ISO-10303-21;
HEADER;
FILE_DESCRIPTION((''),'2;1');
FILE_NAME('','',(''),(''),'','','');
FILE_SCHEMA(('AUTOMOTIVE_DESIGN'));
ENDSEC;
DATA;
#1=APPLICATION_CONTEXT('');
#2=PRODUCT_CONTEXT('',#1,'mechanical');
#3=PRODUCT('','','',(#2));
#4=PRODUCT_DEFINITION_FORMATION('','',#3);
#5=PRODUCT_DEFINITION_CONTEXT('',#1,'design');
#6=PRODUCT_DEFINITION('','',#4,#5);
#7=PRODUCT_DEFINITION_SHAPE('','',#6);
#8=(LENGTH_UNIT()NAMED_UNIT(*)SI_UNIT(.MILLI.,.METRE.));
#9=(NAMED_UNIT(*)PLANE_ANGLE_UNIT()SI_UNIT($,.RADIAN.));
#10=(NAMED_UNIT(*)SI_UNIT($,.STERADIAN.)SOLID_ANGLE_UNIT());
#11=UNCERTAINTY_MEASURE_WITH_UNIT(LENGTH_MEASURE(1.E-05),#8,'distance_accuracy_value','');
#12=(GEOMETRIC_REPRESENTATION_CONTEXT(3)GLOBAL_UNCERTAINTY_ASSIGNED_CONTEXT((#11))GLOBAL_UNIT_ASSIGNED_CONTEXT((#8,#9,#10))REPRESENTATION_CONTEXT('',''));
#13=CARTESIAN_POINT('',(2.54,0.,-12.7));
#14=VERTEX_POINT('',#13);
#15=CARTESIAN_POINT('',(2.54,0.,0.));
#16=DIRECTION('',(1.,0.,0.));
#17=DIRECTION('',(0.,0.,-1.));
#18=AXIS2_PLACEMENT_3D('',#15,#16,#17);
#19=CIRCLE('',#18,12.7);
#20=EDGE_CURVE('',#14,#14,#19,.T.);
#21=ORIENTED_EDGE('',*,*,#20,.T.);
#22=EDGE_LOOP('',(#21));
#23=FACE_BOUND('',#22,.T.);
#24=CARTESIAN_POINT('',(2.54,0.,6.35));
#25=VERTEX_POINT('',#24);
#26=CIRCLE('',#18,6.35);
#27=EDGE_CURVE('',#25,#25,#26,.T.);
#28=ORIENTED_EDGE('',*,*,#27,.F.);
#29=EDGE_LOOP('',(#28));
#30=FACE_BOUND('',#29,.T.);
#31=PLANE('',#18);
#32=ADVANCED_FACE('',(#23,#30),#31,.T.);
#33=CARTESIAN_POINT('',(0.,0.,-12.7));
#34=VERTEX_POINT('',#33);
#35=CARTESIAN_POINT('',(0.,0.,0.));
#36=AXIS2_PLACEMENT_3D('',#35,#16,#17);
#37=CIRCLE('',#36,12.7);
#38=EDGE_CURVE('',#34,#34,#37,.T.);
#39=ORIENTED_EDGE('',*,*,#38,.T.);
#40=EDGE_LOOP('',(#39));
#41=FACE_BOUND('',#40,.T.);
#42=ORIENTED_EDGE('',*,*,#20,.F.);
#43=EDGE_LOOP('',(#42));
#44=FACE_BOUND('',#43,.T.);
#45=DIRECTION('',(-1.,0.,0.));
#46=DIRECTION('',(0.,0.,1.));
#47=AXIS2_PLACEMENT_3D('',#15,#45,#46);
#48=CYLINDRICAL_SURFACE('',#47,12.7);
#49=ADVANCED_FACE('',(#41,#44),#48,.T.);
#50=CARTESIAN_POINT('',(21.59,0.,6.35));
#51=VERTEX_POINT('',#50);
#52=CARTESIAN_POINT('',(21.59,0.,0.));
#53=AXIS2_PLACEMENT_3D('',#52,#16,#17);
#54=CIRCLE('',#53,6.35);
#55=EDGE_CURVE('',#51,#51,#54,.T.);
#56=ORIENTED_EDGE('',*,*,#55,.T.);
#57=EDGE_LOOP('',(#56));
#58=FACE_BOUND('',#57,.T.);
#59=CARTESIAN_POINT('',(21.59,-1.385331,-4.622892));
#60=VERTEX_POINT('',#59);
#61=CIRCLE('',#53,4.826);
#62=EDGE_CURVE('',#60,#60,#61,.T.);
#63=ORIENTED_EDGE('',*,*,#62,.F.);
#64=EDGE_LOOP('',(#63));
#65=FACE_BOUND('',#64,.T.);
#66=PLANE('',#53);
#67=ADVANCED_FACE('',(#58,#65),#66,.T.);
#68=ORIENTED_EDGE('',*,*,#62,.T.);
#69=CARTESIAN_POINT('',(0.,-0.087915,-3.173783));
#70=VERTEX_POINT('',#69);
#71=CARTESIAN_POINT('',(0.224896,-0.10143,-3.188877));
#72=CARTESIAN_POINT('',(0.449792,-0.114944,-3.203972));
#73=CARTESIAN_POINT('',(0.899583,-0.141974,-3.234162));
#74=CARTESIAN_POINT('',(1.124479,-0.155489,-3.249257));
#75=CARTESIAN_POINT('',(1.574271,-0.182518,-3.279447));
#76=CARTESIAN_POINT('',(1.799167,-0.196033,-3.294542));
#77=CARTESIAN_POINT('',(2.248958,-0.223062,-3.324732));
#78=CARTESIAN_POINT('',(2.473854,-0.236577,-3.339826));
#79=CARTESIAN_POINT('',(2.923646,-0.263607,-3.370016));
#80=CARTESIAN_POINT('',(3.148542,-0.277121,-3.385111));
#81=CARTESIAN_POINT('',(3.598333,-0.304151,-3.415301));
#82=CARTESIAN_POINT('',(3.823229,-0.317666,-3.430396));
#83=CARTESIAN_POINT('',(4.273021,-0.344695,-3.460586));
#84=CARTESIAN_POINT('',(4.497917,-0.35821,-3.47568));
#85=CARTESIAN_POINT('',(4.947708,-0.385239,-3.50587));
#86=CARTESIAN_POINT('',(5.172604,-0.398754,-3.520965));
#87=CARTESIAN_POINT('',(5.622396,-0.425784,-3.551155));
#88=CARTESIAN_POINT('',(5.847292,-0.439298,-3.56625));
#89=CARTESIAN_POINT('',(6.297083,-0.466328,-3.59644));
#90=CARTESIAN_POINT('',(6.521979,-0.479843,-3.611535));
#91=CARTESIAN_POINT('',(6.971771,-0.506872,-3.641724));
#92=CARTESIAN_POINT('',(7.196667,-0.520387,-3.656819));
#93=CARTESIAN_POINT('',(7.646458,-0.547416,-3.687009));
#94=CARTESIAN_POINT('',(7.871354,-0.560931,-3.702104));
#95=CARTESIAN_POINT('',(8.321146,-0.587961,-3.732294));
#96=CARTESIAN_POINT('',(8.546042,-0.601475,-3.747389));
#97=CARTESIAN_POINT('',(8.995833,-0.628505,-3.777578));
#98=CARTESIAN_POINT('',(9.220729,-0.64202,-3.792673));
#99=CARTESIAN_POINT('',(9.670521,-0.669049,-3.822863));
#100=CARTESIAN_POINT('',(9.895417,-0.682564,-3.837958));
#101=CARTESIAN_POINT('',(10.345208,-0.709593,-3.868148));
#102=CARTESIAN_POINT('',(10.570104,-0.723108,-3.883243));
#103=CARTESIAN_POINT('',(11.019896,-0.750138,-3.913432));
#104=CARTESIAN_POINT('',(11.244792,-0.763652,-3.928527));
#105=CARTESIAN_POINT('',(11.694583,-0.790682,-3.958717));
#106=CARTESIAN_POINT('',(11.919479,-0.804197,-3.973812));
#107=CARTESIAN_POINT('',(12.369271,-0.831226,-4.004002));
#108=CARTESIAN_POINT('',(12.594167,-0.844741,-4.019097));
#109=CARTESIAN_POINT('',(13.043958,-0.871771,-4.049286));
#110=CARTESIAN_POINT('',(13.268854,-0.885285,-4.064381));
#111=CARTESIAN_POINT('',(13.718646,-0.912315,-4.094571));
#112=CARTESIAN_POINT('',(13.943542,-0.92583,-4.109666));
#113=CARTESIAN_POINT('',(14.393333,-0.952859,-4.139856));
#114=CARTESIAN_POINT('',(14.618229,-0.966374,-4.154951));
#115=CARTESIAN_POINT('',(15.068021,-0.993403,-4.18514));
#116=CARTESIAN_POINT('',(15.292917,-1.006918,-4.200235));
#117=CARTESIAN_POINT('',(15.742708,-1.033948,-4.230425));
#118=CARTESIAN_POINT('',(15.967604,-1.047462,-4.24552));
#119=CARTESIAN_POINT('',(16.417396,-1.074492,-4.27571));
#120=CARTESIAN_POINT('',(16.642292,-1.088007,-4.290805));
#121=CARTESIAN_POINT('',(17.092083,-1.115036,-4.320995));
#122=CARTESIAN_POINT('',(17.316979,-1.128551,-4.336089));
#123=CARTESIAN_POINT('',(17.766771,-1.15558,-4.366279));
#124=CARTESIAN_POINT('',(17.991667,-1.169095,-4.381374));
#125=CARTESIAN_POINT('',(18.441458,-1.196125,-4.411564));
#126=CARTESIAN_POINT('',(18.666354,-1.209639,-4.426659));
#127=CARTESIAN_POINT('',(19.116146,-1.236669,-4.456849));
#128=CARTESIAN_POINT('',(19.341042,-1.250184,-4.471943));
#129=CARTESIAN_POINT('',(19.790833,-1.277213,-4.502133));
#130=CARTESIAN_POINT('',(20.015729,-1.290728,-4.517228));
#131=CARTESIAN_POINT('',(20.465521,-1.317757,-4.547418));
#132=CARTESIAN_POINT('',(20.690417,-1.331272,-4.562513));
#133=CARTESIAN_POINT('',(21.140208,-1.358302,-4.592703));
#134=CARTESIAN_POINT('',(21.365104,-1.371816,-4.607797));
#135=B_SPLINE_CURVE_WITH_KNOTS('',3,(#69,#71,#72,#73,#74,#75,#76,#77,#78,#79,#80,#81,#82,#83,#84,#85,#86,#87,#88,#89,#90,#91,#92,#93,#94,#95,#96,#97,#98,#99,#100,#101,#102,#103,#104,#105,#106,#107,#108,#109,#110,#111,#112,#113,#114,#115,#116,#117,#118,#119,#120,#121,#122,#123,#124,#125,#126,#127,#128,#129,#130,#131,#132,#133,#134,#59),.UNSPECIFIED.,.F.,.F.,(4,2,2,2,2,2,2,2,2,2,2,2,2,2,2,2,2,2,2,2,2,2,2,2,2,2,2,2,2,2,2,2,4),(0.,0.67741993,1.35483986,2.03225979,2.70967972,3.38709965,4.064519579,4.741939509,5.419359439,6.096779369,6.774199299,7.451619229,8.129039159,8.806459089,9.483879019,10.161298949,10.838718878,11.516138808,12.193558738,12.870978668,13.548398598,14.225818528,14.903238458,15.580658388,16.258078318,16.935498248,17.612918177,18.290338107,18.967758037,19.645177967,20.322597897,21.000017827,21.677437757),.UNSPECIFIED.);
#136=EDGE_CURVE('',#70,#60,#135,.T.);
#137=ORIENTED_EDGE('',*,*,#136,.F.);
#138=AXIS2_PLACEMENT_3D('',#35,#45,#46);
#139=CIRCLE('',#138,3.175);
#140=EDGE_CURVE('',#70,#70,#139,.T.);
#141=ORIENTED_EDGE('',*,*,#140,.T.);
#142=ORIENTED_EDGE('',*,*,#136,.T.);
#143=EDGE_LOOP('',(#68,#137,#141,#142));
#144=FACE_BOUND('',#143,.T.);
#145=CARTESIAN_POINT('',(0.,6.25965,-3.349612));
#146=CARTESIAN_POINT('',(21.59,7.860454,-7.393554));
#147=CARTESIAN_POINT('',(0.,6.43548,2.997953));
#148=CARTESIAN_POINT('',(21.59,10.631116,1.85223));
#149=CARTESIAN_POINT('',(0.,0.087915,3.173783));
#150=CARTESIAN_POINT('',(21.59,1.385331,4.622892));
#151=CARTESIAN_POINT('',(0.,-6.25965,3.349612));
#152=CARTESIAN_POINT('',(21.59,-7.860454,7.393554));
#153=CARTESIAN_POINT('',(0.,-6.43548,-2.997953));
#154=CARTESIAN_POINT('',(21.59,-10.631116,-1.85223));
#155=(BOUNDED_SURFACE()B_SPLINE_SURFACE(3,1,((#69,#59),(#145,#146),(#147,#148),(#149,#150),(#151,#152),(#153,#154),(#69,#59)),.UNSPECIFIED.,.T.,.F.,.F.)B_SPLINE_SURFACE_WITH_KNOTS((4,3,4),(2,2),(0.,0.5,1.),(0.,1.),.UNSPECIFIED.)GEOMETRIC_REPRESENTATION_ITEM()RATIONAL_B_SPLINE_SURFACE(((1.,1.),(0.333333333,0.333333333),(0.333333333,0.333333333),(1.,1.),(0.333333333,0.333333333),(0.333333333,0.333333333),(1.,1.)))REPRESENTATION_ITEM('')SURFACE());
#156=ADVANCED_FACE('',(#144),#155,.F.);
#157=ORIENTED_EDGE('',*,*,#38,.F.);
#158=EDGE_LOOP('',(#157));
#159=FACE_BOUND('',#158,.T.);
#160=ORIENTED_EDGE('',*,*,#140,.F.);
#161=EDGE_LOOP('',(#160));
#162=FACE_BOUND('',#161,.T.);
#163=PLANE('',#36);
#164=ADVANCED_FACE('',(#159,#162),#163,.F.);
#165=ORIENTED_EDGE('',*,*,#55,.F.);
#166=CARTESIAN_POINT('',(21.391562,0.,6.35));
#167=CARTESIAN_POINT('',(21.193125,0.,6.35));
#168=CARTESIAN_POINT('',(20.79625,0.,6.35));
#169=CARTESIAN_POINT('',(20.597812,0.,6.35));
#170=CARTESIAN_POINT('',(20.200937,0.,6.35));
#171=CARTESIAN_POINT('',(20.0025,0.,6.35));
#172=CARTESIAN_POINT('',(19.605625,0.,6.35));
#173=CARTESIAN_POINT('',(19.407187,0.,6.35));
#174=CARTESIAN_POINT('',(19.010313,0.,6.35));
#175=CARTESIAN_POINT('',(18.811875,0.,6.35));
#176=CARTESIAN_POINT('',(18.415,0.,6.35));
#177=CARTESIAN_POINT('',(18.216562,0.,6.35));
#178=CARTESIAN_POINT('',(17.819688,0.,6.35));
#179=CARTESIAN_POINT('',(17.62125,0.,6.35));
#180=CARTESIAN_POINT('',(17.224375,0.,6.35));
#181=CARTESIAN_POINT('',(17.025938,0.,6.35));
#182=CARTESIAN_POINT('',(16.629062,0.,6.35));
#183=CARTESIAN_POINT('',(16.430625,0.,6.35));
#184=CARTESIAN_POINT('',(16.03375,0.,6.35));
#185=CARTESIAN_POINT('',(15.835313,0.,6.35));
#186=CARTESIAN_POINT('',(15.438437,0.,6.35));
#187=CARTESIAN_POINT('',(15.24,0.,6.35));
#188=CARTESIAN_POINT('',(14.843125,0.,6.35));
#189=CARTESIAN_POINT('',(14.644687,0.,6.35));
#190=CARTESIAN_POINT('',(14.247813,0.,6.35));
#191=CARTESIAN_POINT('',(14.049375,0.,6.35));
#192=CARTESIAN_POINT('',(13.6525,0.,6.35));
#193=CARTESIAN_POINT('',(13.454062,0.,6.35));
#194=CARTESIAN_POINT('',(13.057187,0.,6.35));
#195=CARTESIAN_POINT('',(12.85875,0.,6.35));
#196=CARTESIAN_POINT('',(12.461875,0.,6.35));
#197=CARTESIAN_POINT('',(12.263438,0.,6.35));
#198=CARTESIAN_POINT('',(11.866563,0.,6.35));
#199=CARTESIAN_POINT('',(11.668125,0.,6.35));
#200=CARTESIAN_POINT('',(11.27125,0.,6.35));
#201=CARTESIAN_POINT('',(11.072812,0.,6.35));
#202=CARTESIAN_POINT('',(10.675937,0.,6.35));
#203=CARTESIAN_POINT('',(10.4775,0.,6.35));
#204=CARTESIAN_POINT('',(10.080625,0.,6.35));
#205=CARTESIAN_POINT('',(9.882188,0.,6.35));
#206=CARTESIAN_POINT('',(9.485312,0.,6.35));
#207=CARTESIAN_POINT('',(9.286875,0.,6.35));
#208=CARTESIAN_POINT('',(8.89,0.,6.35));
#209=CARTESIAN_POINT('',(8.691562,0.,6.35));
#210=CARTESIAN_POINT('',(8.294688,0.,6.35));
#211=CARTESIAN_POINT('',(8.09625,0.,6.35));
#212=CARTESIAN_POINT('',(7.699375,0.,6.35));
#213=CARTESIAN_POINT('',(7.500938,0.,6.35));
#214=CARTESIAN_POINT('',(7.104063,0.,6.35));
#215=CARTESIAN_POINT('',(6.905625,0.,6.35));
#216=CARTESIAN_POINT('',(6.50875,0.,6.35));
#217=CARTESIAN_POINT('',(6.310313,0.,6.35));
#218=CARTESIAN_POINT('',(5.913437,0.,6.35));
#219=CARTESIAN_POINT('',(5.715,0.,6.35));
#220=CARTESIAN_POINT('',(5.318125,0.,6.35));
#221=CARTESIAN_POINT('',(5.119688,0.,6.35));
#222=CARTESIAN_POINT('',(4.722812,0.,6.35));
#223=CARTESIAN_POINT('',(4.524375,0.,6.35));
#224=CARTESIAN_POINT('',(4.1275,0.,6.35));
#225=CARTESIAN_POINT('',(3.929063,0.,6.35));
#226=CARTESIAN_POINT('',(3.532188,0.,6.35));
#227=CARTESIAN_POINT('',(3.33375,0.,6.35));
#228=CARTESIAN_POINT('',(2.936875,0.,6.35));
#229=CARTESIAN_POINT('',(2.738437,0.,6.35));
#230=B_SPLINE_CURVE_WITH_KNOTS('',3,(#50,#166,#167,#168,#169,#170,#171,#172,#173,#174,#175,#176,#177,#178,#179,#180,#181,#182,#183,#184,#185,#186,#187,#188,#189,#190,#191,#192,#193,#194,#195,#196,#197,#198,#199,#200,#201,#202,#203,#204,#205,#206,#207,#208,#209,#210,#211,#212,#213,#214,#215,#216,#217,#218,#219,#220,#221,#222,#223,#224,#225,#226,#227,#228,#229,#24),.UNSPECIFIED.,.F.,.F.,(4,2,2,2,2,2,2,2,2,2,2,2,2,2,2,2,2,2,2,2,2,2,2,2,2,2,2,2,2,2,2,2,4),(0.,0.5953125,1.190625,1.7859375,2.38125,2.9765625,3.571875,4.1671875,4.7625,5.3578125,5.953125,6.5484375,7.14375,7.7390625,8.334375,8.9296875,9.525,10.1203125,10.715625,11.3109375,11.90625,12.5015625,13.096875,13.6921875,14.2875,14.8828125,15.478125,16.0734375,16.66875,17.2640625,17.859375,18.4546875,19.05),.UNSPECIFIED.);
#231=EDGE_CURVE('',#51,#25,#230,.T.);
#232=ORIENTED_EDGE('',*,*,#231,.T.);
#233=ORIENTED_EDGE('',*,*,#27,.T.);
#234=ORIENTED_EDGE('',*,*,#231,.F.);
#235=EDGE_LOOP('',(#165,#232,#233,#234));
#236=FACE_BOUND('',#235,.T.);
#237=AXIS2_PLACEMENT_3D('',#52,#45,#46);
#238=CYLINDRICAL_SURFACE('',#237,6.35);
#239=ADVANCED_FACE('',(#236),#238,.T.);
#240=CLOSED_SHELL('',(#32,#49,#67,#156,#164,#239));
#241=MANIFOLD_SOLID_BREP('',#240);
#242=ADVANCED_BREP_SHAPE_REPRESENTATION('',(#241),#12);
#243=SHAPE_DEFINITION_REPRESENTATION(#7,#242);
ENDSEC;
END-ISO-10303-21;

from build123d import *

# Parameters (mm, degrees)
SKETCH1_R           = 12.7
BOSS_EXTRUDE1_DEPTH = 2.54
SKETCH2_R           = 6.35
BOSS_EXTRUDE2_DEPTH = 19.05


with BuildPart() as part:
    # Sketch1 → Boss-Extrude1 (new body)
    with BuildSketch(Plane(origin=(0, 0, 0), x_dir=(0, 0, -1), z_dir=(1, 0, 0))):
        Circle(SKETCH1_R)
    extrude(amount=BOSS_EXTRUDE1_DEPTH)

    # Sketch2 → Boss-Extrude2 (add)
    with BuildSketch(Plane(origin=(2.54, 0, 0), x_dir=(0, 0, -1), z_dir=(1, 0, 0))):
        with Locations(Location((0, 0, 0), (0, 0, 180))):
            Circle(SKETCH2_R)
    extrude(amount=BOSS_EXTRUDE2_DEPTH)

    # Cut-Loft1: read off the stored shape, not the designer's step
    # Cut-Loft1: loft between two sections, ruled curve by curve
    cut_loft1_from = [
        Edge.make_bspline([(0, -0.087914937, -3.173782596), (0, 6.259650254, -3.34961247), (0, 6.435480128, 2.997952721), (0, 0.087914937, 3.173782596), (0, -6.259650254, 3.34961247), (0, -6.435480128, -2.997952721), (0, -0.087914937, -3.173782596)], [0, 0, 0, 0, 0.5, 0.5, 0.5, 1, 1, 1, 1], 3, [1, 0.333333333, 0.333333333, 1, 0.333333333, 0.333333333, 1]),
    ]
    cut_loft1_to = [
        Edge.make_bspline([(21.59, -1.385331043, -4.622892374), (21.59, 7.860453704, -7.393554461), (21.59, 10.631115791, 1.852230287), (21.59, 1.385331043, 4.622892374), (21.59, -7.860453704, 7.393554461), (21.59, -10.631115791, -1.852230287), (21.59, -1.385331043, -4.622892374)], [0, 0, 0, 0, 0.5, 0.5, 0.5, 1, 1, 1, 1], 3, [1, 0.333333333, 0.333333333, 1, 0.333333333, 0.333333333, 1]),
    ]
    cut_loft1 = Solid(Shell([*[Face.make_surface_from_curves(cut_loft1_from[k], cut_loft1_to[k]) for k in range(1)], Face(Wire(cut_loft1_from)), Face(Wire(cut_loft1_to))]))
    add(cut_loft1, mode=Mode.SUBTRACT)


solid = part.part
